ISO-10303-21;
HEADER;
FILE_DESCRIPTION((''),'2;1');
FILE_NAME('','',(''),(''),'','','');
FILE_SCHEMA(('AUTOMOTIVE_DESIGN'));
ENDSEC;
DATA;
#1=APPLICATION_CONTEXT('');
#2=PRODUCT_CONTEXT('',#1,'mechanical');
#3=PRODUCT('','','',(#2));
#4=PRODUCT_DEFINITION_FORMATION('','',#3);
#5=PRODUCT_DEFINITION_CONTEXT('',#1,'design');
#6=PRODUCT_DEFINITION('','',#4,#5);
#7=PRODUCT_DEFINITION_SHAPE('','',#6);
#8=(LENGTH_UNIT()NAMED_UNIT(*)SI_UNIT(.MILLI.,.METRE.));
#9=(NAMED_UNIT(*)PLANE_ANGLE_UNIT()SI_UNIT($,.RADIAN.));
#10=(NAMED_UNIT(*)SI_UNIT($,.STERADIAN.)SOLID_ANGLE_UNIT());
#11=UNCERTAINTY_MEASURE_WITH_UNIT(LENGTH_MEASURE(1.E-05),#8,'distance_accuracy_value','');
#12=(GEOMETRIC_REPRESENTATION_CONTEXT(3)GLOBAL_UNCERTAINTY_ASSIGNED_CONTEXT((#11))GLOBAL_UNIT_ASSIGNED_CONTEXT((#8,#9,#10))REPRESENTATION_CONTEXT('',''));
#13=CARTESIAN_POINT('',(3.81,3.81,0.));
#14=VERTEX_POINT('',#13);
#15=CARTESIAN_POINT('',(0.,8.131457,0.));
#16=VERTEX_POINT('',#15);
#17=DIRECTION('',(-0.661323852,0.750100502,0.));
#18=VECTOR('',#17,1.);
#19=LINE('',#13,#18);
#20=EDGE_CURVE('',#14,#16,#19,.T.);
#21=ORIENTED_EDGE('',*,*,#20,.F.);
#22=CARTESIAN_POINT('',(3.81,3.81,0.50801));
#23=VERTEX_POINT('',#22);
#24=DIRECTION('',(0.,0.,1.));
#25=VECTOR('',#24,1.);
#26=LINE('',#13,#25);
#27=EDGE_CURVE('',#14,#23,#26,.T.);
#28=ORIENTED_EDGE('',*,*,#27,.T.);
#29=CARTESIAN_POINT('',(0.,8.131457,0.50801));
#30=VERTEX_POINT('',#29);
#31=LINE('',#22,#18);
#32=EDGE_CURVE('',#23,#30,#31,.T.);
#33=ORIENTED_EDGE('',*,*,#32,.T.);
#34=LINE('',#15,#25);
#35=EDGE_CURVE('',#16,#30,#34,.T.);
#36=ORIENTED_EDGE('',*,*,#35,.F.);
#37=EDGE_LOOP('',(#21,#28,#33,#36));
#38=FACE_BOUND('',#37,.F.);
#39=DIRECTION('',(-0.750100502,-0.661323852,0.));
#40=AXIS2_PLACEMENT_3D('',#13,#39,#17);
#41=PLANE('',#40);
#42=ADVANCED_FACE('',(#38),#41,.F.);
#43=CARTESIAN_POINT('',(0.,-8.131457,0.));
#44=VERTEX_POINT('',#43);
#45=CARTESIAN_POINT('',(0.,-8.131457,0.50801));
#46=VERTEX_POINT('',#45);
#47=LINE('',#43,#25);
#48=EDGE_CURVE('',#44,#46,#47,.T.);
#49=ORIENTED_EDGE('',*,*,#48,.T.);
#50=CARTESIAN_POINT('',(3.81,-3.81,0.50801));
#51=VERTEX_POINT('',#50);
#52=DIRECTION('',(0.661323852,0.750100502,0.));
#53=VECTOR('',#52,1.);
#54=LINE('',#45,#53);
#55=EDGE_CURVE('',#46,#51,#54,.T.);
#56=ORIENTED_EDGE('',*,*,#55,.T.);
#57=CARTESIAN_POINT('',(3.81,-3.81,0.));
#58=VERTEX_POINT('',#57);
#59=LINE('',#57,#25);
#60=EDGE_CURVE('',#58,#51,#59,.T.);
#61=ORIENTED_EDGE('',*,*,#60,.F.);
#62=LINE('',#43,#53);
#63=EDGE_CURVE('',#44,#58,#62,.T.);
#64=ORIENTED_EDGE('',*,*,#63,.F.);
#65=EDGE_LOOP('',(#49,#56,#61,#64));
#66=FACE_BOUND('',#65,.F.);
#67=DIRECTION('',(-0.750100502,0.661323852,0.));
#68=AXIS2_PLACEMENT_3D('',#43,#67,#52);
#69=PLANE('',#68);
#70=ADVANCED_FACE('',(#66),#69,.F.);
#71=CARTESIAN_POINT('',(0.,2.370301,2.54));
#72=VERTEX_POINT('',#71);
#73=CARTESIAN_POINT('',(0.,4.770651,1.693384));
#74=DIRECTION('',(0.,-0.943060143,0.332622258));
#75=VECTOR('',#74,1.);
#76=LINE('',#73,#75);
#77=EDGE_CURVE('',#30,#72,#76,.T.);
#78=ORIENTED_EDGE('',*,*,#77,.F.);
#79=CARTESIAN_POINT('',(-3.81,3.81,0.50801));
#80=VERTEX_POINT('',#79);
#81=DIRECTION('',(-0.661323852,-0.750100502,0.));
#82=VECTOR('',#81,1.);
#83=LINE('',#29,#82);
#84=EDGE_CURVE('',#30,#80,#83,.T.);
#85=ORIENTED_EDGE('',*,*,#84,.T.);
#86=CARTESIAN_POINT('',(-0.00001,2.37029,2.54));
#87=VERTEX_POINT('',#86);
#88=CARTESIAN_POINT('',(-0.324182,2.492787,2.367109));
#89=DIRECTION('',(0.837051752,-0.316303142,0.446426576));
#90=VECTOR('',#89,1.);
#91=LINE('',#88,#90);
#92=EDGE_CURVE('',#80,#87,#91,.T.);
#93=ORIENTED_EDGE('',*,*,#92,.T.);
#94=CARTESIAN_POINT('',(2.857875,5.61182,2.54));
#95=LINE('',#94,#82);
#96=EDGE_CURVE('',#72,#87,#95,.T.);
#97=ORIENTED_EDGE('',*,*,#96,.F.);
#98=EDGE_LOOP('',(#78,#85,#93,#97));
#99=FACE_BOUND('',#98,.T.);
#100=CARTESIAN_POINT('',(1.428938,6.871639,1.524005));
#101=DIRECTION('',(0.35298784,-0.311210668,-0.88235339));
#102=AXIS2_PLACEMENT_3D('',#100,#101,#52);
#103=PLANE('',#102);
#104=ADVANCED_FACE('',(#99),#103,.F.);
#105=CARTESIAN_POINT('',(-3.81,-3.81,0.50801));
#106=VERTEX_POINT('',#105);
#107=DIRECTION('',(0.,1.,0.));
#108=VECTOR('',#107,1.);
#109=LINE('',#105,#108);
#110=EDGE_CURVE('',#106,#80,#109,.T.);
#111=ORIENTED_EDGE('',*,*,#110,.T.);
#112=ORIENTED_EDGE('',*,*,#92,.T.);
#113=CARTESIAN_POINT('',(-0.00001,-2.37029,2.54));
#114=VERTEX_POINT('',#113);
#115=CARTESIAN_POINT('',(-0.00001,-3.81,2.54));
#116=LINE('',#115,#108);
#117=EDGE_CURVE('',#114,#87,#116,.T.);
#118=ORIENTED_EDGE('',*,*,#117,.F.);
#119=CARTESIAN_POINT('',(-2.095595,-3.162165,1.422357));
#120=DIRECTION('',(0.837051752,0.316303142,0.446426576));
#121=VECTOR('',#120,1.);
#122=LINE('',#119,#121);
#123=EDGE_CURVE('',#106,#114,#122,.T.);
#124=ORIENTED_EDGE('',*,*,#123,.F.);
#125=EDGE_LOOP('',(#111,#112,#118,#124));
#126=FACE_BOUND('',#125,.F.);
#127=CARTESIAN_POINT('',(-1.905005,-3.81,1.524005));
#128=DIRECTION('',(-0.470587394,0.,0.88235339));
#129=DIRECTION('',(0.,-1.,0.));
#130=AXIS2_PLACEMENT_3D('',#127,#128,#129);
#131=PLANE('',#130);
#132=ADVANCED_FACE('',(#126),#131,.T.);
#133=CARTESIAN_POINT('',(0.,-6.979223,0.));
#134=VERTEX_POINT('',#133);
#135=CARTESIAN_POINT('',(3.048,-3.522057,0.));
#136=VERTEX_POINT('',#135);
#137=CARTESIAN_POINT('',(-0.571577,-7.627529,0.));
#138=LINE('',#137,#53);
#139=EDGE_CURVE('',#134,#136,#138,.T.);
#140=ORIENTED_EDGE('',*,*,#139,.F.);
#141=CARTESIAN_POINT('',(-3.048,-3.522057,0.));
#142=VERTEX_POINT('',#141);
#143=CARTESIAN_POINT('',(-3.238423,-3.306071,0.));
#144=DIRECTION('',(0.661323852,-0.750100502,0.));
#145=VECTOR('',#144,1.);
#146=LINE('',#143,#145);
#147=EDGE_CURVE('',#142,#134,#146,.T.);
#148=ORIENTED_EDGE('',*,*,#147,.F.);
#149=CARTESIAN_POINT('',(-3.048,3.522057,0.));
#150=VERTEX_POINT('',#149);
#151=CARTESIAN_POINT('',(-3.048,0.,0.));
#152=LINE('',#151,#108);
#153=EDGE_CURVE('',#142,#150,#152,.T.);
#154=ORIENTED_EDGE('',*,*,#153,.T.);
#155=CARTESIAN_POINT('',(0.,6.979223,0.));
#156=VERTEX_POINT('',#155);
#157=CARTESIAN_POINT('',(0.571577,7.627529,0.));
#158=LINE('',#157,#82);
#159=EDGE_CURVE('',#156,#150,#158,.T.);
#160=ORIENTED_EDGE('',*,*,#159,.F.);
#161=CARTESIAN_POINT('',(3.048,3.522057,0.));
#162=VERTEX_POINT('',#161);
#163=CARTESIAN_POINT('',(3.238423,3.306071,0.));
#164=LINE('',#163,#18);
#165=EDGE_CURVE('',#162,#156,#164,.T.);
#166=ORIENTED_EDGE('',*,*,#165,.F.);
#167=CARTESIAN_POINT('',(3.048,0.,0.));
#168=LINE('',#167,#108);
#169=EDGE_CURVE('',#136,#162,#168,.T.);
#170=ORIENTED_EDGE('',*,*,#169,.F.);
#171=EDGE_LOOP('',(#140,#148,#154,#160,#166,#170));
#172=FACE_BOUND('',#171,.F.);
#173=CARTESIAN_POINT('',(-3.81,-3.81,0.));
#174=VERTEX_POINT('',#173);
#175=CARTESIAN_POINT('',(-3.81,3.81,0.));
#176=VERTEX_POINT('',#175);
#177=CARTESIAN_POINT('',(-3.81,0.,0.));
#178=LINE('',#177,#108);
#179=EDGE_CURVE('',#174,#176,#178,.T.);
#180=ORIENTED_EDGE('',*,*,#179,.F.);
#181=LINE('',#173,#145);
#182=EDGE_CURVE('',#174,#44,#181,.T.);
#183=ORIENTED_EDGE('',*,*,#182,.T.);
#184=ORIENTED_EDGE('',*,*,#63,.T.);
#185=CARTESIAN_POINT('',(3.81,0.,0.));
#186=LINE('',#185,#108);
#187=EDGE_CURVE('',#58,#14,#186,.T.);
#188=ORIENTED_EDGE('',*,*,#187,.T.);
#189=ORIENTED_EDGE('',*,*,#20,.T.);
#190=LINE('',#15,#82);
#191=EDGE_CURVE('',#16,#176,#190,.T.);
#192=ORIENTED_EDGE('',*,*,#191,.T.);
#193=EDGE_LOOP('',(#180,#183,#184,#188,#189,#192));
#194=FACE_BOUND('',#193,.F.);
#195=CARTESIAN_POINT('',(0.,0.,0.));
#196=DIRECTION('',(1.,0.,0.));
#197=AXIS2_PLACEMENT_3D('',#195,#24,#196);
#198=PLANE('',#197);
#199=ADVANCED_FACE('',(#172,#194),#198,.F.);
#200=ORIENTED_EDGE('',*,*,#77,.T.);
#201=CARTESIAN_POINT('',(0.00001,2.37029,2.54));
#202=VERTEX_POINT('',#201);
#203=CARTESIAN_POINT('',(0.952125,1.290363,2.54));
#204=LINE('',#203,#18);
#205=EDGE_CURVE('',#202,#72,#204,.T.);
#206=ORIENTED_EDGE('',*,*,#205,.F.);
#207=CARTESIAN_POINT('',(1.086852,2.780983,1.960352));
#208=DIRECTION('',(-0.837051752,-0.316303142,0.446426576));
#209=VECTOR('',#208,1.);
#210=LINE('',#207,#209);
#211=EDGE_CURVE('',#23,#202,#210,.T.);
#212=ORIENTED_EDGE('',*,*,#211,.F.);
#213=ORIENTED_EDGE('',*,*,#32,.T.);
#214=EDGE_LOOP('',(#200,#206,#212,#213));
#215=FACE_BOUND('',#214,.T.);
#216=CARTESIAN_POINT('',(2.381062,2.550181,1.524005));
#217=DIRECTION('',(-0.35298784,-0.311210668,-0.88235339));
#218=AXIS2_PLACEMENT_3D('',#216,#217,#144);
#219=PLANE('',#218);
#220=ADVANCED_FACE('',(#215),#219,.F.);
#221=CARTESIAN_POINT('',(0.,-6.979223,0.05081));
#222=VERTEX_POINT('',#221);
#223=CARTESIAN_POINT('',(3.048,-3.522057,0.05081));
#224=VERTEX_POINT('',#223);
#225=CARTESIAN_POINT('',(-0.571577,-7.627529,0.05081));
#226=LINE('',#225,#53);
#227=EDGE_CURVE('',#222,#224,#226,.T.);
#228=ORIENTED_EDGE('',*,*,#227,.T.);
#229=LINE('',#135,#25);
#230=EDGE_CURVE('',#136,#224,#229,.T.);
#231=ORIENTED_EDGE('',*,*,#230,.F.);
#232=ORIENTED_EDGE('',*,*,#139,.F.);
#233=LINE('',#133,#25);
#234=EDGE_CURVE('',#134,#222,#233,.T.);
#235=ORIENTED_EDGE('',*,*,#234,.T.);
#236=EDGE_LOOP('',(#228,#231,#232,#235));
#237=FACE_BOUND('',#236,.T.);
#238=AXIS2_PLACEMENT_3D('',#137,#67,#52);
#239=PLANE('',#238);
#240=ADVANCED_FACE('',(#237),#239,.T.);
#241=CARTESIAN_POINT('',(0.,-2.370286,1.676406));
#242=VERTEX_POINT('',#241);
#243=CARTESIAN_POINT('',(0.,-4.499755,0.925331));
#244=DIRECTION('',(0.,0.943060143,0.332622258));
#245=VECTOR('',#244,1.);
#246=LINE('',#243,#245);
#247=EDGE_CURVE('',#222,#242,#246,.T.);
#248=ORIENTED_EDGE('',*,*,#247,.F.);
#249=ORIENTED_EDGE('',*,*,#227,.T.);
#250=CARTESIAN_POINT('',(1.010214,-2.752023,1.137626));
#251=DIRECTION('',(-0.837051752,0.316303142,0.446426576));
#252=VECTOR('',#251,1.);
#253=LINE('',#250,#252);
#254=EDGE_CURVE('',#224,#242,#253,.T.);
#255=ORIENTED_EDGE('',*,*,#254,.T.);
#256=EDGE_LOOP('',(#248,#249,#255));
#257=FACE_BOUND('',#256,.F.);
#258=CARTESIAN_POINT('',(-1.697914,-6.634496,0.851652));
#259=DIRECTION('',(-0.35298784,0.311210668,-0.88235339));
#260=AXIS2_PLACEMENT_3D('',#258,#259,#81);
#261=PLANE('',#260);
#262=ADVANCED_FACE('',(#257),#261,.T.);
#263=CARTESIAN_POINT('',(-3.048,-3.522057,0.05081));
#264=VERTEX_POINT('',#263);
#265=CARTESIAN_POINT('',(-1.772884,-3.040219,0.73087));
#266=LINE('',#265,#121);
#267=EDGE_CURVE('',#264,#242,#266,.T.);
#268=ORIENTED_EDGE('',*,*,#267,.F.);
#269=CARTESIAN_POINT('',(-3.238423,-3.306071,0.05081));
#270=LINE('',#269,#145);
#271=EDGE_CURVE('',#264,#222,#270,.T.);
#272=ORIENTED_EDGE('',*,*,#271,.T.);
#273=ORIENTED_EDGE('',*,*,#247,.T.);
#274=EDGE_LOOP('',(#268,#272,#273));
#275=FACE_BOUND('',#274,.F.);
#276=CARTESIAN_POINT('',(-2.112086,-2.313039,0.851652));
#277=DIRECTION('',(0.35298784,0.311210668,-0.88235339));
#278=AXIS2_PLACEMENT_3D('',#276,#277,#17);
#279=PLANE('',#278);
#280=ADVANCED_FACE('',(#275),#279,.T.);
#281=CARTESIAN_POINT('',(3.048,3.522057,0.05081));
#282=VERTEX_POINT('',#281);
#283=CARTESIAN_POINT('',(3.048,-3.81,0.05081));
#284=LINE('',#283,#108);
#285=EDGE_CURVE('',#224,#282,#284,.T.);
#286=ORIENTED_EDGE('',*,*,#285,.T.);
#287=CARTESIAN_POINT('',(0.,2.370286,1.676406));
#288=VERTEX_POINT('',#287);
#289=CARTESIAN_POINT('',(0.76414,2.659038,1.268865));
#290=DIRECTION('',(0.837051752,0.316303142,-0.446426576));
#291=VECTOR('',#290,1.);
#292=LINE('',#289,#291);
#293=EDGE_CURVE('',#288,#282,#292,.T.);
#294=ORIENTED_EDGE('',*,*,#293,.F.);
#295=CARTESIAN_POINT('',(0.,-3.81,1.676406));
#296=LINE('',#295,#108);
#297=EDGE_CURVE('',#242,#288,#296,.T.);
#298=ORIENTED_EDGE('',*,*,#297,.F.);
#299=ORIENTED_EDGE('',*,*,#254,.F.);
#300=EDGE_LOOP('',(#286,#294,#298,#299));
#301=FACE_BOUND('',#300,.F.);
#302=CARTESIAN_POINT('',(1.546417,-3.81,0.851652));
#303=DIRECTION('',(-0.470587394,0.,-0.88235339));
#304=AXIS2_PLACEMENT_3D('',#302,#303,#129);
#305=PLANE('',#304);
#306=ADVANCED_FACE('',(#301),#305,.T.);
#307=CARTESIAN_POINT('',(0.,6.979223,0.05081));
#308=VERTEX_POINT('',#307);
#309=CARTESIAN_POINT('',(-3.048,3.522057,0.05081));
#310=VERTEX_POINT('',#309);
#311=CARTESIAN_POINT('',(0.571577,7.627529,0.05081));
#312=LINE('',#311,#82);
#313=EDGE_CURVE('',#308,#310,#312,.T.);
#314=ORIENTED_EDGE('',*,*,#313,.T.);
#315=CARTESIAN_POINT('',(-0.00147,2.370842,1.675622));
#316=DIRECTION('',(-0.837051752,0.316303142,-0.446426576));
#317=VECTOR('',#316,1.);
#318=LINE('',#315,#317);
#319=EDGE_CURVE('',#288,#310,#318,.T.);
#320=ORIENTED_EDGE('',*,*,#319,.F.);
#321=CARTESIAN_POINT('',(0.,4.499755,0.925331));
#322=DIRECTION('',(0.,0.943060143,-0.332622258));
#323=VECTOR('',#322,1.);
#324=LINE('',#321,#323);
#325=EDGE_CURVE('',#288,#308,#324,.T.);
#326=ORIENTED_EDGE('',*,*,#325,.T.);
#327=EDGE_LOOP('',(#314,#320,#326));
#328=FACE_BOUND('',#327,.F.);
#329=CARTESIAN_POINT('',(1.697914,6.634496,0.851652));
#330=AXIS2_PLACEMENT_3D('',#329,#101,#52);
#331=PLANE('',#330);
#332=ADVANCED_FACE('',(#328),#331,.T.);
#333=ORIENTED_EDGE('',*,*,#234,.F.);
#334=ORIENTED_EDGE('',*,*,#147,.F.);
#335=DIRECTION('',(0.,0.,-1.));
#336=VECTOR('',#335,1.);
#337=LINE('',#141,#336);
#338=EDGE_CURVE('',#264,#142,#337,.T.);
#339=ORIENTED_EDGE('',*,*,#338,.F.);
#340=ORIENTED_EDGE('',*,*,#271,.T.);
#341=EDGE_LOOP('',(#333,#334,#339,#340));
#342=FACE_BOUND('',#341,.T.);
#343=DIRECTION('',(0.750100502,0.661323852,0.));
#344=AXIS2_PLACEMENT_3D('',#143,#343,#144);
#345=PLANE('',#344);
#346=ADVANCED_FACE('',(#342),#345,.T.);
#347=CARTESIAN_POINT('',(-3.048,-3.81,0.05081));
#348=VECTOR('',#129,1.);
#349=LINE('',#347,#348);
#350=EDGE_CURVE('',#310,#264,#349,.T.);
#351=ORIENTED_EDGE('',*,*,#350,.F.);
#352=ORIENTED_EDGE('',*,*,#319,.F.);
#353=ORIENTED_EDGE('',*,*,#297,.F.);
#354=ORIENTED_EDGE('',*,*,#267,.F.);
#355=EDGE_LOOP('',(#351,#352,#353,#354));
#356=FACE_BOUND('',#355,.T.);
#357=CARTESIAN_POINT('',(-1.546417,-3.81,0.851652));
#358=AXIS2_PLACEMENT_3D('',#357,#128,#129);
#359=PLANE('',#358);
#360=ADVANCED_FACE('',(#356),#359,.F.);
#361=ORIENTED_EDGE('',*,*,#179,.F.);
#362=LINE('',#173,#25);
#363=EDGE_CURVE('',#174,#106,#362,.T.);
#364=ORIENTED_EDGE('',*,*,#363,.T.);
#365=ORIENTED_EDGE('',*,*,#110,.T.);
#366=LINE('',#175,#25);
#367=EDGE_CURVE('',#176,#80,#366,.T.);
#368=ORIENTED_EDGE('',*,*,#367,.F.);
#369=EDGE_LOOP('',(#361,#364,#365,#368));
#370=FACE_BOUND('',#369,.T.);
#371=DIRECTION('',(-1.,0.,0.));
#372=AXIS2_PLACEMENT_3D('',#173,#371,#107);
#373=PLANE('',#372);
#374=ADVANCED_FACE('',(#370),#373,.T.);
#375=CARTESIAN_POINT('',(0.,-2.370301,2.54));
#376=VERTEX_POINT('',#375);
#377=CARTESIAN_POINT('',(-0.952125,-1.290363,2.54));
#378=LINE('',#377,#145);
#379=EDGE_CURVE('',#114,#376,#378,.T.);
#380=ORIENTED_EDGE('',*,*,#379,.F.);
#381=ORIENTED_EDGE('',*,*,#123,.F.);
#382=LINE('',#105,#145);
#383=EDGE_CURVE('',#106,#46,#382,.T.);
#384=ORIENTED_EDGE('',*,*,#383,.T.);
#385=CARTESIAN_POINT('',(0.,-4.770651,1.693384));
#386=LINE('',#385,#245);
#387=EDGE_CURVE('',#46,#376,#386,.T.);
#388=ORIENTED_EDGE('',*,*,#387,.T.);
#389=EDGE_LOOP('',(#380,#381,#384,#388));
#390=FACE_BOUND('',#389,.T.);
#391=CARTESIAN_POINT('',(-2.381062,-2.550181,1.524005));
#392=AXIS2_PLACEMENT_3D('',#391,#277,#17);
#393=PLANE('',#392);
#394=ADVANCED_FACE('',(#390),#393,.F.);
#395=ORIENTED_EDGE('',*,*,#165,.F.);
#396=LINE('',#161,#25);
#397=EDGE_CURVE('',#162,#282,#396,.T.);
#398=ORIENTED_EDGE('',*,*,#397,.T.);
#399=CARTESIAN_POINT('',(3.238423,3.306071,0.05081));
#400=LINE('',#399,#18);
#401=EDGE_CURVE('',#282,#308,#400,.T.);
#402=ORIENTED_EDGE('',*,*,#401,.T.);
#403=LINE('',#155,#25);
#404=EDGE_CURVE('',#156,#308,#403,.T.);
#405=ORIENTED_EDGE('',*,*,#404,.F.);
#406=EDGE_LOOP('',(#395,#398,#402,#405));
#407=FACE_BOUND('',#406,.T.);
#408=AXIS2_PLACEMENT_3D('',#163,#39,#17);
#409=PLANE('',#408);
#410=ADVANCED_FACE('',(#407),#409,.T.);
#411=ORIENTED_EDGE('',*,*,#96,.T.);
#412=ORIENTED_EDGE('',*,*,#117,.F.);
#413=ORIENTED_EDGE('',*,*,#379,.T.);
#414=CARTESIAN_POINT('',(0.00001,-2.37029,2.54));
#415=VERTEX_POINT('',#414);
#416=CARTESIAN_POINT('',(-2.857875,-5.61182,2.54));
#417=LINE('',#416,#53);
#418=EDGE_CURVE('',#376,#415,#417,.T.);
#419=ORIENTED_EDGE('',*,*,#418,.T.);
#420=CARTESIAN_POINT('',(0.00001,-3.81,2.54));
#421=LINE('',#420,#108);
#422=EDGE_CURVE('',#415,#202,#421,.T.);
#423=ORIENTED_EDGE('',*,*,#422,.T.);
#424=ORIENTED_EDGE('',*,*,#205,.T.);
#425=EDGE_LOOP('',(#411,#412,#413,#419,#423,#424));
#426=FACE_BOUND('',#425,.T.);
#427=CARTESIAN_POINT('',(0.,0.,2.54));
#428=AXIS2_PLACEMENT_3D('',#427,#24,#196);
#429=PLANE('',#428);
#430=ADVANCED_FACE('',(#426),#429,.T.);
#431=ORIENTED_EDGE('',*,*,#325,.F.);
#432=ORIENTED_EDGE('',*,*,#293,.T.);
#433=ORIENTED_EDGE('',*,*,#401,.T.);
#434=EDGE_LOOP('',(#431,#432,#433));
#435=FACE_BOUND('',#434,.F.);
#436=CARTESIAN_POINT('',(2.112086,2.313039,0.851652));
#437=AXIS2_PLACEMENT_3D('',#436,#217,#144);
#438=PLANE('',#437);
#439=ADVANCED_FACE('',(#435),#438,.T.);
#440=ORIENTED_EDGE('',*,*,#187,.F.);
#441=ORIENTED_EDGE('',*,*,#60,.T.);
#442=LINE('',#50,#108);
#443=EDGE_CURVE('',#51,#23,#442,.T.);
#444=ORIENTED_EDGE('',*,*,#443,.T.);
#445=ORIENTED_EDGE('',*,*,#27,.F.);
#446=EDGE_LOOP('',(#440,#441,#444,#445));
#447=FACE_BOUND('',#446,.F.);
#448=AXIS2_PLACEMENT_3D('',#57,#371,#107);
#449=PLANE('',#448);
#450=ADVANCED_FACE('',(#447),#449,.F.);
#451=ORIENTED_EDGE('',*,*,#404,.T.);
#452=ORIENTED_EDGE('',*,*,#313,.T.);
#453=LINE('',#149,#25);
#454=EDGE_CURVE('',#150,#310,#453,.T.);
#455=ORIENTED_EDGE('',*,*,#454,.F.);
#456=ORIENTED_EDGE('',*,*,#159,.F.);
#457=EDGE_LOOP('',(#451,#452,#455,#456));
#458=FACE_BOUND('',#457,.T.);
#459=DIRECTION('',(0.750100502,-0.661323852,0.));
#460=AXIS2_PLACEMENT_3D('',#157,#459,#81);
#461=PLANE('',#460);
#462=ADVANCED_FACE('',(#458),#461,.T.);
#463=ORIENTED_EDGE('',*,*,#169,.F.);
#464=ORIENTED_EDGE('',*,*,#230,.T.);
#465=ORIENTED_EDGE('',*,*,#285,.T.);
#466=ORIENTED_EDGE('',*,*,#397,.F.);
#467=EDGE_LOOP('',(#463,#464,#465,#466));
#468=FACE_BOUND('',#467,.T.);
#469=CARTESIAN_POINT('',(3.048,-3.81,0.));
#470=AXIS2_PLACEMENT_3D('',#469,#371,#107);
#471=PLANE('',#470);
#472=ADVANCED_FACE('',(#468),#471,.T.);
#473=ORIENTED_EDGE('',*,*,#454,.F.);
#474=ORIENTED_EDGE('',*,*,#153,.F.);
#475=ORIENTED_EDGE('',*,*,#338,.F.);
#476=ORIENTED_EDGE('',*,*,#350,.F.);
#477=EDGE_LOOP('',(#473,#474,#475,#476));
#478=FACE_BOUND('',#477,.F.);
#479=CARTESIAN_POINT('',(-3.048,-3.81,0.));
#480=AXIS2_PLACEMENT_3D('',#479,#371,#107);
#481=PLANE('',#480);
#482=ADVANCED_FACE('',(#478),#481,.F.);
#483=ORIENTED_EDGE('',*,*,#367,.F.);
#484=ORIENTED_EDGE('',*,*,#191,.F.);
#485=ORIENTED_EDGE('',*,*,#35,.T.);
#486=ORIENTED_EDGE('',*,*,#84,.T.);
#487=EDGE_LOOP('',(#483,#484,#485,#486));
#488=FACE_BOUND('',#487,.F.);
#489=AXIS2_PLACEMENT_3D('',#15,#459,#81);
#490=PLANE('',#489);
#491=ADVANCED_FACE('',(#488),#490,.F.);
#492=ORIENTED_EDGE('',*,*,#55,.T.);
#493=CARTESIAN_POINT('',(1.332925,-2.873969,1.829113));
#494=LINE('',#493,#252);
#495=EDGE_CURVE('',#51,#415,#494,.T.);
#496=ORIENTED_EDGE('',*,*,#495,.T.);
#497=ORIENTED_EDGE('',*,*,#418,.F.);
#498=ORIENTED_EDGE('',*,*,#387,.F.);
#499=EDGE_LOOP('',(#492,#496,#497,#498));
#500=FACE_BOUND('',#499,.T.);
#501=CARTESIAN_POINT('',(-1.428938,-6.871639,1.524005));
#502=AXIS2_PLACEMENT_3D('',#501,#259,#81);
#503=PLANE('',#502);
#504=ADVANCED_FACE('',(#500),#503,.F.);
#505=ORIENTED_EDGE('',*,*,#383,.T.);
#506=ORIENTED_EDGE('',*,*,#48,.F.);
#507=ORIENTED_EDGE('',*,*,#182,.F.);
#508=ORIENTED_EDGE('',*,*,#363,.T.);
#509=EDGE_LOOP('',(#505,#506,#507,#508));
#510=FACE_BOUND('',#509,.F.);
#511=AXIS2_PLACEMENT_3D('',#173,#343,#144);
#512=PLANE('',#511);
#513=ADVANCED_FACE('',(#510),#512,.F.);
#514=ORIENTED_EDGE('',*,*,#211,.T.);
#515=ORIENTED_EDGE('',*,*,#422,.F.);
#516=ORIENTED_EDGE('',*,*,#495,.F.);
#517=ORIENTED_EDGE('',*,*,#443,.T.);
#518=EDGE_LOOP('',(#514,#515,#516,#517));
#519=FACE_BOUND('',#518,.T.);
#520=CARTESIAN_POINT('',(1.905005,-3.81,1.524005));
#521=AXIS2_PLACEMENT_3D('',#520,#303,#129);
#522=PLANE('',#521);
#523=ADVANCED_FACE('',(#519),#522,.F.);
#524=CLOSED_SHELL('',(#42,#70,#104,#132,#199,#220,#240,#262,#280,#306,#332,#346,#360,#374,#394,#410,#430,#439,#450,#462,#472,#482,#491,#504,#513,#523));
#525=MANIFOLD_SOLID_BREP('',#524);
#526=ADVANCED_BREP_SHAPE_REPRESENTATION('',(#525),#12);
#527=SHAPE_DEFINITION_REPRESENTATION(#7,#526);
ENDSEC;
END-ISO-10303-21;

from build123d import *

# Parameters (mm, degrees)
F0_W     = 7.62
F0_H     = 7.62
F1_DEPTH = 2.54
F2_SIZE2 = 3.80999
F2_SIZE  = 2.03199
F3_T     = -0.762


# Not quite as in the source:
# - a fillet or chamfer is up to 0.001 mm smaller than in the source, because OpenCascade refuses the exact size


with BuildPart() as f1:
    # F0 (on Top) → F1 (new body)
    with BuildSketch(Plane.XY):
        Rectangle(F0_W, F0_H)
        Polygon((-3.81, 3.81), (3.81, 3.81), (0, 8.1314574927), align=None)
        Polygon((0, -8.1314574927), (3.81, -3.81), (-3.81, -3.81), align=None)
    extrude(amount=F1_DEPTH)

    # F2 (size 2.032 and 3.81 in the source; OpenCascade refuses exactly that, so slightly less here)
    f2_edges = [f1.edges().sort_by_distance(p)[0] for p in [
        (3.81, 0, 2.54),
        (1.905, 5.970729, 2.54),
        (-1.905, -5.970729, 2.54),
        (-3.81, 0, 2.54),
        (-1.905, 5.970729, 2.54),
        (1.905, -5.970729, 2.54),
    ]]
    chamfer(f2_edges, length=F2_SIZE, length2=F2_SIZE2)

    # F3
    f3_openings = [f1.faces().sort_by_distance(p)[0] for p in [
        (0, 0, 0),
    ]]
    offset(amount=F3_T, openings=f3_openings)


solid = f1.part
